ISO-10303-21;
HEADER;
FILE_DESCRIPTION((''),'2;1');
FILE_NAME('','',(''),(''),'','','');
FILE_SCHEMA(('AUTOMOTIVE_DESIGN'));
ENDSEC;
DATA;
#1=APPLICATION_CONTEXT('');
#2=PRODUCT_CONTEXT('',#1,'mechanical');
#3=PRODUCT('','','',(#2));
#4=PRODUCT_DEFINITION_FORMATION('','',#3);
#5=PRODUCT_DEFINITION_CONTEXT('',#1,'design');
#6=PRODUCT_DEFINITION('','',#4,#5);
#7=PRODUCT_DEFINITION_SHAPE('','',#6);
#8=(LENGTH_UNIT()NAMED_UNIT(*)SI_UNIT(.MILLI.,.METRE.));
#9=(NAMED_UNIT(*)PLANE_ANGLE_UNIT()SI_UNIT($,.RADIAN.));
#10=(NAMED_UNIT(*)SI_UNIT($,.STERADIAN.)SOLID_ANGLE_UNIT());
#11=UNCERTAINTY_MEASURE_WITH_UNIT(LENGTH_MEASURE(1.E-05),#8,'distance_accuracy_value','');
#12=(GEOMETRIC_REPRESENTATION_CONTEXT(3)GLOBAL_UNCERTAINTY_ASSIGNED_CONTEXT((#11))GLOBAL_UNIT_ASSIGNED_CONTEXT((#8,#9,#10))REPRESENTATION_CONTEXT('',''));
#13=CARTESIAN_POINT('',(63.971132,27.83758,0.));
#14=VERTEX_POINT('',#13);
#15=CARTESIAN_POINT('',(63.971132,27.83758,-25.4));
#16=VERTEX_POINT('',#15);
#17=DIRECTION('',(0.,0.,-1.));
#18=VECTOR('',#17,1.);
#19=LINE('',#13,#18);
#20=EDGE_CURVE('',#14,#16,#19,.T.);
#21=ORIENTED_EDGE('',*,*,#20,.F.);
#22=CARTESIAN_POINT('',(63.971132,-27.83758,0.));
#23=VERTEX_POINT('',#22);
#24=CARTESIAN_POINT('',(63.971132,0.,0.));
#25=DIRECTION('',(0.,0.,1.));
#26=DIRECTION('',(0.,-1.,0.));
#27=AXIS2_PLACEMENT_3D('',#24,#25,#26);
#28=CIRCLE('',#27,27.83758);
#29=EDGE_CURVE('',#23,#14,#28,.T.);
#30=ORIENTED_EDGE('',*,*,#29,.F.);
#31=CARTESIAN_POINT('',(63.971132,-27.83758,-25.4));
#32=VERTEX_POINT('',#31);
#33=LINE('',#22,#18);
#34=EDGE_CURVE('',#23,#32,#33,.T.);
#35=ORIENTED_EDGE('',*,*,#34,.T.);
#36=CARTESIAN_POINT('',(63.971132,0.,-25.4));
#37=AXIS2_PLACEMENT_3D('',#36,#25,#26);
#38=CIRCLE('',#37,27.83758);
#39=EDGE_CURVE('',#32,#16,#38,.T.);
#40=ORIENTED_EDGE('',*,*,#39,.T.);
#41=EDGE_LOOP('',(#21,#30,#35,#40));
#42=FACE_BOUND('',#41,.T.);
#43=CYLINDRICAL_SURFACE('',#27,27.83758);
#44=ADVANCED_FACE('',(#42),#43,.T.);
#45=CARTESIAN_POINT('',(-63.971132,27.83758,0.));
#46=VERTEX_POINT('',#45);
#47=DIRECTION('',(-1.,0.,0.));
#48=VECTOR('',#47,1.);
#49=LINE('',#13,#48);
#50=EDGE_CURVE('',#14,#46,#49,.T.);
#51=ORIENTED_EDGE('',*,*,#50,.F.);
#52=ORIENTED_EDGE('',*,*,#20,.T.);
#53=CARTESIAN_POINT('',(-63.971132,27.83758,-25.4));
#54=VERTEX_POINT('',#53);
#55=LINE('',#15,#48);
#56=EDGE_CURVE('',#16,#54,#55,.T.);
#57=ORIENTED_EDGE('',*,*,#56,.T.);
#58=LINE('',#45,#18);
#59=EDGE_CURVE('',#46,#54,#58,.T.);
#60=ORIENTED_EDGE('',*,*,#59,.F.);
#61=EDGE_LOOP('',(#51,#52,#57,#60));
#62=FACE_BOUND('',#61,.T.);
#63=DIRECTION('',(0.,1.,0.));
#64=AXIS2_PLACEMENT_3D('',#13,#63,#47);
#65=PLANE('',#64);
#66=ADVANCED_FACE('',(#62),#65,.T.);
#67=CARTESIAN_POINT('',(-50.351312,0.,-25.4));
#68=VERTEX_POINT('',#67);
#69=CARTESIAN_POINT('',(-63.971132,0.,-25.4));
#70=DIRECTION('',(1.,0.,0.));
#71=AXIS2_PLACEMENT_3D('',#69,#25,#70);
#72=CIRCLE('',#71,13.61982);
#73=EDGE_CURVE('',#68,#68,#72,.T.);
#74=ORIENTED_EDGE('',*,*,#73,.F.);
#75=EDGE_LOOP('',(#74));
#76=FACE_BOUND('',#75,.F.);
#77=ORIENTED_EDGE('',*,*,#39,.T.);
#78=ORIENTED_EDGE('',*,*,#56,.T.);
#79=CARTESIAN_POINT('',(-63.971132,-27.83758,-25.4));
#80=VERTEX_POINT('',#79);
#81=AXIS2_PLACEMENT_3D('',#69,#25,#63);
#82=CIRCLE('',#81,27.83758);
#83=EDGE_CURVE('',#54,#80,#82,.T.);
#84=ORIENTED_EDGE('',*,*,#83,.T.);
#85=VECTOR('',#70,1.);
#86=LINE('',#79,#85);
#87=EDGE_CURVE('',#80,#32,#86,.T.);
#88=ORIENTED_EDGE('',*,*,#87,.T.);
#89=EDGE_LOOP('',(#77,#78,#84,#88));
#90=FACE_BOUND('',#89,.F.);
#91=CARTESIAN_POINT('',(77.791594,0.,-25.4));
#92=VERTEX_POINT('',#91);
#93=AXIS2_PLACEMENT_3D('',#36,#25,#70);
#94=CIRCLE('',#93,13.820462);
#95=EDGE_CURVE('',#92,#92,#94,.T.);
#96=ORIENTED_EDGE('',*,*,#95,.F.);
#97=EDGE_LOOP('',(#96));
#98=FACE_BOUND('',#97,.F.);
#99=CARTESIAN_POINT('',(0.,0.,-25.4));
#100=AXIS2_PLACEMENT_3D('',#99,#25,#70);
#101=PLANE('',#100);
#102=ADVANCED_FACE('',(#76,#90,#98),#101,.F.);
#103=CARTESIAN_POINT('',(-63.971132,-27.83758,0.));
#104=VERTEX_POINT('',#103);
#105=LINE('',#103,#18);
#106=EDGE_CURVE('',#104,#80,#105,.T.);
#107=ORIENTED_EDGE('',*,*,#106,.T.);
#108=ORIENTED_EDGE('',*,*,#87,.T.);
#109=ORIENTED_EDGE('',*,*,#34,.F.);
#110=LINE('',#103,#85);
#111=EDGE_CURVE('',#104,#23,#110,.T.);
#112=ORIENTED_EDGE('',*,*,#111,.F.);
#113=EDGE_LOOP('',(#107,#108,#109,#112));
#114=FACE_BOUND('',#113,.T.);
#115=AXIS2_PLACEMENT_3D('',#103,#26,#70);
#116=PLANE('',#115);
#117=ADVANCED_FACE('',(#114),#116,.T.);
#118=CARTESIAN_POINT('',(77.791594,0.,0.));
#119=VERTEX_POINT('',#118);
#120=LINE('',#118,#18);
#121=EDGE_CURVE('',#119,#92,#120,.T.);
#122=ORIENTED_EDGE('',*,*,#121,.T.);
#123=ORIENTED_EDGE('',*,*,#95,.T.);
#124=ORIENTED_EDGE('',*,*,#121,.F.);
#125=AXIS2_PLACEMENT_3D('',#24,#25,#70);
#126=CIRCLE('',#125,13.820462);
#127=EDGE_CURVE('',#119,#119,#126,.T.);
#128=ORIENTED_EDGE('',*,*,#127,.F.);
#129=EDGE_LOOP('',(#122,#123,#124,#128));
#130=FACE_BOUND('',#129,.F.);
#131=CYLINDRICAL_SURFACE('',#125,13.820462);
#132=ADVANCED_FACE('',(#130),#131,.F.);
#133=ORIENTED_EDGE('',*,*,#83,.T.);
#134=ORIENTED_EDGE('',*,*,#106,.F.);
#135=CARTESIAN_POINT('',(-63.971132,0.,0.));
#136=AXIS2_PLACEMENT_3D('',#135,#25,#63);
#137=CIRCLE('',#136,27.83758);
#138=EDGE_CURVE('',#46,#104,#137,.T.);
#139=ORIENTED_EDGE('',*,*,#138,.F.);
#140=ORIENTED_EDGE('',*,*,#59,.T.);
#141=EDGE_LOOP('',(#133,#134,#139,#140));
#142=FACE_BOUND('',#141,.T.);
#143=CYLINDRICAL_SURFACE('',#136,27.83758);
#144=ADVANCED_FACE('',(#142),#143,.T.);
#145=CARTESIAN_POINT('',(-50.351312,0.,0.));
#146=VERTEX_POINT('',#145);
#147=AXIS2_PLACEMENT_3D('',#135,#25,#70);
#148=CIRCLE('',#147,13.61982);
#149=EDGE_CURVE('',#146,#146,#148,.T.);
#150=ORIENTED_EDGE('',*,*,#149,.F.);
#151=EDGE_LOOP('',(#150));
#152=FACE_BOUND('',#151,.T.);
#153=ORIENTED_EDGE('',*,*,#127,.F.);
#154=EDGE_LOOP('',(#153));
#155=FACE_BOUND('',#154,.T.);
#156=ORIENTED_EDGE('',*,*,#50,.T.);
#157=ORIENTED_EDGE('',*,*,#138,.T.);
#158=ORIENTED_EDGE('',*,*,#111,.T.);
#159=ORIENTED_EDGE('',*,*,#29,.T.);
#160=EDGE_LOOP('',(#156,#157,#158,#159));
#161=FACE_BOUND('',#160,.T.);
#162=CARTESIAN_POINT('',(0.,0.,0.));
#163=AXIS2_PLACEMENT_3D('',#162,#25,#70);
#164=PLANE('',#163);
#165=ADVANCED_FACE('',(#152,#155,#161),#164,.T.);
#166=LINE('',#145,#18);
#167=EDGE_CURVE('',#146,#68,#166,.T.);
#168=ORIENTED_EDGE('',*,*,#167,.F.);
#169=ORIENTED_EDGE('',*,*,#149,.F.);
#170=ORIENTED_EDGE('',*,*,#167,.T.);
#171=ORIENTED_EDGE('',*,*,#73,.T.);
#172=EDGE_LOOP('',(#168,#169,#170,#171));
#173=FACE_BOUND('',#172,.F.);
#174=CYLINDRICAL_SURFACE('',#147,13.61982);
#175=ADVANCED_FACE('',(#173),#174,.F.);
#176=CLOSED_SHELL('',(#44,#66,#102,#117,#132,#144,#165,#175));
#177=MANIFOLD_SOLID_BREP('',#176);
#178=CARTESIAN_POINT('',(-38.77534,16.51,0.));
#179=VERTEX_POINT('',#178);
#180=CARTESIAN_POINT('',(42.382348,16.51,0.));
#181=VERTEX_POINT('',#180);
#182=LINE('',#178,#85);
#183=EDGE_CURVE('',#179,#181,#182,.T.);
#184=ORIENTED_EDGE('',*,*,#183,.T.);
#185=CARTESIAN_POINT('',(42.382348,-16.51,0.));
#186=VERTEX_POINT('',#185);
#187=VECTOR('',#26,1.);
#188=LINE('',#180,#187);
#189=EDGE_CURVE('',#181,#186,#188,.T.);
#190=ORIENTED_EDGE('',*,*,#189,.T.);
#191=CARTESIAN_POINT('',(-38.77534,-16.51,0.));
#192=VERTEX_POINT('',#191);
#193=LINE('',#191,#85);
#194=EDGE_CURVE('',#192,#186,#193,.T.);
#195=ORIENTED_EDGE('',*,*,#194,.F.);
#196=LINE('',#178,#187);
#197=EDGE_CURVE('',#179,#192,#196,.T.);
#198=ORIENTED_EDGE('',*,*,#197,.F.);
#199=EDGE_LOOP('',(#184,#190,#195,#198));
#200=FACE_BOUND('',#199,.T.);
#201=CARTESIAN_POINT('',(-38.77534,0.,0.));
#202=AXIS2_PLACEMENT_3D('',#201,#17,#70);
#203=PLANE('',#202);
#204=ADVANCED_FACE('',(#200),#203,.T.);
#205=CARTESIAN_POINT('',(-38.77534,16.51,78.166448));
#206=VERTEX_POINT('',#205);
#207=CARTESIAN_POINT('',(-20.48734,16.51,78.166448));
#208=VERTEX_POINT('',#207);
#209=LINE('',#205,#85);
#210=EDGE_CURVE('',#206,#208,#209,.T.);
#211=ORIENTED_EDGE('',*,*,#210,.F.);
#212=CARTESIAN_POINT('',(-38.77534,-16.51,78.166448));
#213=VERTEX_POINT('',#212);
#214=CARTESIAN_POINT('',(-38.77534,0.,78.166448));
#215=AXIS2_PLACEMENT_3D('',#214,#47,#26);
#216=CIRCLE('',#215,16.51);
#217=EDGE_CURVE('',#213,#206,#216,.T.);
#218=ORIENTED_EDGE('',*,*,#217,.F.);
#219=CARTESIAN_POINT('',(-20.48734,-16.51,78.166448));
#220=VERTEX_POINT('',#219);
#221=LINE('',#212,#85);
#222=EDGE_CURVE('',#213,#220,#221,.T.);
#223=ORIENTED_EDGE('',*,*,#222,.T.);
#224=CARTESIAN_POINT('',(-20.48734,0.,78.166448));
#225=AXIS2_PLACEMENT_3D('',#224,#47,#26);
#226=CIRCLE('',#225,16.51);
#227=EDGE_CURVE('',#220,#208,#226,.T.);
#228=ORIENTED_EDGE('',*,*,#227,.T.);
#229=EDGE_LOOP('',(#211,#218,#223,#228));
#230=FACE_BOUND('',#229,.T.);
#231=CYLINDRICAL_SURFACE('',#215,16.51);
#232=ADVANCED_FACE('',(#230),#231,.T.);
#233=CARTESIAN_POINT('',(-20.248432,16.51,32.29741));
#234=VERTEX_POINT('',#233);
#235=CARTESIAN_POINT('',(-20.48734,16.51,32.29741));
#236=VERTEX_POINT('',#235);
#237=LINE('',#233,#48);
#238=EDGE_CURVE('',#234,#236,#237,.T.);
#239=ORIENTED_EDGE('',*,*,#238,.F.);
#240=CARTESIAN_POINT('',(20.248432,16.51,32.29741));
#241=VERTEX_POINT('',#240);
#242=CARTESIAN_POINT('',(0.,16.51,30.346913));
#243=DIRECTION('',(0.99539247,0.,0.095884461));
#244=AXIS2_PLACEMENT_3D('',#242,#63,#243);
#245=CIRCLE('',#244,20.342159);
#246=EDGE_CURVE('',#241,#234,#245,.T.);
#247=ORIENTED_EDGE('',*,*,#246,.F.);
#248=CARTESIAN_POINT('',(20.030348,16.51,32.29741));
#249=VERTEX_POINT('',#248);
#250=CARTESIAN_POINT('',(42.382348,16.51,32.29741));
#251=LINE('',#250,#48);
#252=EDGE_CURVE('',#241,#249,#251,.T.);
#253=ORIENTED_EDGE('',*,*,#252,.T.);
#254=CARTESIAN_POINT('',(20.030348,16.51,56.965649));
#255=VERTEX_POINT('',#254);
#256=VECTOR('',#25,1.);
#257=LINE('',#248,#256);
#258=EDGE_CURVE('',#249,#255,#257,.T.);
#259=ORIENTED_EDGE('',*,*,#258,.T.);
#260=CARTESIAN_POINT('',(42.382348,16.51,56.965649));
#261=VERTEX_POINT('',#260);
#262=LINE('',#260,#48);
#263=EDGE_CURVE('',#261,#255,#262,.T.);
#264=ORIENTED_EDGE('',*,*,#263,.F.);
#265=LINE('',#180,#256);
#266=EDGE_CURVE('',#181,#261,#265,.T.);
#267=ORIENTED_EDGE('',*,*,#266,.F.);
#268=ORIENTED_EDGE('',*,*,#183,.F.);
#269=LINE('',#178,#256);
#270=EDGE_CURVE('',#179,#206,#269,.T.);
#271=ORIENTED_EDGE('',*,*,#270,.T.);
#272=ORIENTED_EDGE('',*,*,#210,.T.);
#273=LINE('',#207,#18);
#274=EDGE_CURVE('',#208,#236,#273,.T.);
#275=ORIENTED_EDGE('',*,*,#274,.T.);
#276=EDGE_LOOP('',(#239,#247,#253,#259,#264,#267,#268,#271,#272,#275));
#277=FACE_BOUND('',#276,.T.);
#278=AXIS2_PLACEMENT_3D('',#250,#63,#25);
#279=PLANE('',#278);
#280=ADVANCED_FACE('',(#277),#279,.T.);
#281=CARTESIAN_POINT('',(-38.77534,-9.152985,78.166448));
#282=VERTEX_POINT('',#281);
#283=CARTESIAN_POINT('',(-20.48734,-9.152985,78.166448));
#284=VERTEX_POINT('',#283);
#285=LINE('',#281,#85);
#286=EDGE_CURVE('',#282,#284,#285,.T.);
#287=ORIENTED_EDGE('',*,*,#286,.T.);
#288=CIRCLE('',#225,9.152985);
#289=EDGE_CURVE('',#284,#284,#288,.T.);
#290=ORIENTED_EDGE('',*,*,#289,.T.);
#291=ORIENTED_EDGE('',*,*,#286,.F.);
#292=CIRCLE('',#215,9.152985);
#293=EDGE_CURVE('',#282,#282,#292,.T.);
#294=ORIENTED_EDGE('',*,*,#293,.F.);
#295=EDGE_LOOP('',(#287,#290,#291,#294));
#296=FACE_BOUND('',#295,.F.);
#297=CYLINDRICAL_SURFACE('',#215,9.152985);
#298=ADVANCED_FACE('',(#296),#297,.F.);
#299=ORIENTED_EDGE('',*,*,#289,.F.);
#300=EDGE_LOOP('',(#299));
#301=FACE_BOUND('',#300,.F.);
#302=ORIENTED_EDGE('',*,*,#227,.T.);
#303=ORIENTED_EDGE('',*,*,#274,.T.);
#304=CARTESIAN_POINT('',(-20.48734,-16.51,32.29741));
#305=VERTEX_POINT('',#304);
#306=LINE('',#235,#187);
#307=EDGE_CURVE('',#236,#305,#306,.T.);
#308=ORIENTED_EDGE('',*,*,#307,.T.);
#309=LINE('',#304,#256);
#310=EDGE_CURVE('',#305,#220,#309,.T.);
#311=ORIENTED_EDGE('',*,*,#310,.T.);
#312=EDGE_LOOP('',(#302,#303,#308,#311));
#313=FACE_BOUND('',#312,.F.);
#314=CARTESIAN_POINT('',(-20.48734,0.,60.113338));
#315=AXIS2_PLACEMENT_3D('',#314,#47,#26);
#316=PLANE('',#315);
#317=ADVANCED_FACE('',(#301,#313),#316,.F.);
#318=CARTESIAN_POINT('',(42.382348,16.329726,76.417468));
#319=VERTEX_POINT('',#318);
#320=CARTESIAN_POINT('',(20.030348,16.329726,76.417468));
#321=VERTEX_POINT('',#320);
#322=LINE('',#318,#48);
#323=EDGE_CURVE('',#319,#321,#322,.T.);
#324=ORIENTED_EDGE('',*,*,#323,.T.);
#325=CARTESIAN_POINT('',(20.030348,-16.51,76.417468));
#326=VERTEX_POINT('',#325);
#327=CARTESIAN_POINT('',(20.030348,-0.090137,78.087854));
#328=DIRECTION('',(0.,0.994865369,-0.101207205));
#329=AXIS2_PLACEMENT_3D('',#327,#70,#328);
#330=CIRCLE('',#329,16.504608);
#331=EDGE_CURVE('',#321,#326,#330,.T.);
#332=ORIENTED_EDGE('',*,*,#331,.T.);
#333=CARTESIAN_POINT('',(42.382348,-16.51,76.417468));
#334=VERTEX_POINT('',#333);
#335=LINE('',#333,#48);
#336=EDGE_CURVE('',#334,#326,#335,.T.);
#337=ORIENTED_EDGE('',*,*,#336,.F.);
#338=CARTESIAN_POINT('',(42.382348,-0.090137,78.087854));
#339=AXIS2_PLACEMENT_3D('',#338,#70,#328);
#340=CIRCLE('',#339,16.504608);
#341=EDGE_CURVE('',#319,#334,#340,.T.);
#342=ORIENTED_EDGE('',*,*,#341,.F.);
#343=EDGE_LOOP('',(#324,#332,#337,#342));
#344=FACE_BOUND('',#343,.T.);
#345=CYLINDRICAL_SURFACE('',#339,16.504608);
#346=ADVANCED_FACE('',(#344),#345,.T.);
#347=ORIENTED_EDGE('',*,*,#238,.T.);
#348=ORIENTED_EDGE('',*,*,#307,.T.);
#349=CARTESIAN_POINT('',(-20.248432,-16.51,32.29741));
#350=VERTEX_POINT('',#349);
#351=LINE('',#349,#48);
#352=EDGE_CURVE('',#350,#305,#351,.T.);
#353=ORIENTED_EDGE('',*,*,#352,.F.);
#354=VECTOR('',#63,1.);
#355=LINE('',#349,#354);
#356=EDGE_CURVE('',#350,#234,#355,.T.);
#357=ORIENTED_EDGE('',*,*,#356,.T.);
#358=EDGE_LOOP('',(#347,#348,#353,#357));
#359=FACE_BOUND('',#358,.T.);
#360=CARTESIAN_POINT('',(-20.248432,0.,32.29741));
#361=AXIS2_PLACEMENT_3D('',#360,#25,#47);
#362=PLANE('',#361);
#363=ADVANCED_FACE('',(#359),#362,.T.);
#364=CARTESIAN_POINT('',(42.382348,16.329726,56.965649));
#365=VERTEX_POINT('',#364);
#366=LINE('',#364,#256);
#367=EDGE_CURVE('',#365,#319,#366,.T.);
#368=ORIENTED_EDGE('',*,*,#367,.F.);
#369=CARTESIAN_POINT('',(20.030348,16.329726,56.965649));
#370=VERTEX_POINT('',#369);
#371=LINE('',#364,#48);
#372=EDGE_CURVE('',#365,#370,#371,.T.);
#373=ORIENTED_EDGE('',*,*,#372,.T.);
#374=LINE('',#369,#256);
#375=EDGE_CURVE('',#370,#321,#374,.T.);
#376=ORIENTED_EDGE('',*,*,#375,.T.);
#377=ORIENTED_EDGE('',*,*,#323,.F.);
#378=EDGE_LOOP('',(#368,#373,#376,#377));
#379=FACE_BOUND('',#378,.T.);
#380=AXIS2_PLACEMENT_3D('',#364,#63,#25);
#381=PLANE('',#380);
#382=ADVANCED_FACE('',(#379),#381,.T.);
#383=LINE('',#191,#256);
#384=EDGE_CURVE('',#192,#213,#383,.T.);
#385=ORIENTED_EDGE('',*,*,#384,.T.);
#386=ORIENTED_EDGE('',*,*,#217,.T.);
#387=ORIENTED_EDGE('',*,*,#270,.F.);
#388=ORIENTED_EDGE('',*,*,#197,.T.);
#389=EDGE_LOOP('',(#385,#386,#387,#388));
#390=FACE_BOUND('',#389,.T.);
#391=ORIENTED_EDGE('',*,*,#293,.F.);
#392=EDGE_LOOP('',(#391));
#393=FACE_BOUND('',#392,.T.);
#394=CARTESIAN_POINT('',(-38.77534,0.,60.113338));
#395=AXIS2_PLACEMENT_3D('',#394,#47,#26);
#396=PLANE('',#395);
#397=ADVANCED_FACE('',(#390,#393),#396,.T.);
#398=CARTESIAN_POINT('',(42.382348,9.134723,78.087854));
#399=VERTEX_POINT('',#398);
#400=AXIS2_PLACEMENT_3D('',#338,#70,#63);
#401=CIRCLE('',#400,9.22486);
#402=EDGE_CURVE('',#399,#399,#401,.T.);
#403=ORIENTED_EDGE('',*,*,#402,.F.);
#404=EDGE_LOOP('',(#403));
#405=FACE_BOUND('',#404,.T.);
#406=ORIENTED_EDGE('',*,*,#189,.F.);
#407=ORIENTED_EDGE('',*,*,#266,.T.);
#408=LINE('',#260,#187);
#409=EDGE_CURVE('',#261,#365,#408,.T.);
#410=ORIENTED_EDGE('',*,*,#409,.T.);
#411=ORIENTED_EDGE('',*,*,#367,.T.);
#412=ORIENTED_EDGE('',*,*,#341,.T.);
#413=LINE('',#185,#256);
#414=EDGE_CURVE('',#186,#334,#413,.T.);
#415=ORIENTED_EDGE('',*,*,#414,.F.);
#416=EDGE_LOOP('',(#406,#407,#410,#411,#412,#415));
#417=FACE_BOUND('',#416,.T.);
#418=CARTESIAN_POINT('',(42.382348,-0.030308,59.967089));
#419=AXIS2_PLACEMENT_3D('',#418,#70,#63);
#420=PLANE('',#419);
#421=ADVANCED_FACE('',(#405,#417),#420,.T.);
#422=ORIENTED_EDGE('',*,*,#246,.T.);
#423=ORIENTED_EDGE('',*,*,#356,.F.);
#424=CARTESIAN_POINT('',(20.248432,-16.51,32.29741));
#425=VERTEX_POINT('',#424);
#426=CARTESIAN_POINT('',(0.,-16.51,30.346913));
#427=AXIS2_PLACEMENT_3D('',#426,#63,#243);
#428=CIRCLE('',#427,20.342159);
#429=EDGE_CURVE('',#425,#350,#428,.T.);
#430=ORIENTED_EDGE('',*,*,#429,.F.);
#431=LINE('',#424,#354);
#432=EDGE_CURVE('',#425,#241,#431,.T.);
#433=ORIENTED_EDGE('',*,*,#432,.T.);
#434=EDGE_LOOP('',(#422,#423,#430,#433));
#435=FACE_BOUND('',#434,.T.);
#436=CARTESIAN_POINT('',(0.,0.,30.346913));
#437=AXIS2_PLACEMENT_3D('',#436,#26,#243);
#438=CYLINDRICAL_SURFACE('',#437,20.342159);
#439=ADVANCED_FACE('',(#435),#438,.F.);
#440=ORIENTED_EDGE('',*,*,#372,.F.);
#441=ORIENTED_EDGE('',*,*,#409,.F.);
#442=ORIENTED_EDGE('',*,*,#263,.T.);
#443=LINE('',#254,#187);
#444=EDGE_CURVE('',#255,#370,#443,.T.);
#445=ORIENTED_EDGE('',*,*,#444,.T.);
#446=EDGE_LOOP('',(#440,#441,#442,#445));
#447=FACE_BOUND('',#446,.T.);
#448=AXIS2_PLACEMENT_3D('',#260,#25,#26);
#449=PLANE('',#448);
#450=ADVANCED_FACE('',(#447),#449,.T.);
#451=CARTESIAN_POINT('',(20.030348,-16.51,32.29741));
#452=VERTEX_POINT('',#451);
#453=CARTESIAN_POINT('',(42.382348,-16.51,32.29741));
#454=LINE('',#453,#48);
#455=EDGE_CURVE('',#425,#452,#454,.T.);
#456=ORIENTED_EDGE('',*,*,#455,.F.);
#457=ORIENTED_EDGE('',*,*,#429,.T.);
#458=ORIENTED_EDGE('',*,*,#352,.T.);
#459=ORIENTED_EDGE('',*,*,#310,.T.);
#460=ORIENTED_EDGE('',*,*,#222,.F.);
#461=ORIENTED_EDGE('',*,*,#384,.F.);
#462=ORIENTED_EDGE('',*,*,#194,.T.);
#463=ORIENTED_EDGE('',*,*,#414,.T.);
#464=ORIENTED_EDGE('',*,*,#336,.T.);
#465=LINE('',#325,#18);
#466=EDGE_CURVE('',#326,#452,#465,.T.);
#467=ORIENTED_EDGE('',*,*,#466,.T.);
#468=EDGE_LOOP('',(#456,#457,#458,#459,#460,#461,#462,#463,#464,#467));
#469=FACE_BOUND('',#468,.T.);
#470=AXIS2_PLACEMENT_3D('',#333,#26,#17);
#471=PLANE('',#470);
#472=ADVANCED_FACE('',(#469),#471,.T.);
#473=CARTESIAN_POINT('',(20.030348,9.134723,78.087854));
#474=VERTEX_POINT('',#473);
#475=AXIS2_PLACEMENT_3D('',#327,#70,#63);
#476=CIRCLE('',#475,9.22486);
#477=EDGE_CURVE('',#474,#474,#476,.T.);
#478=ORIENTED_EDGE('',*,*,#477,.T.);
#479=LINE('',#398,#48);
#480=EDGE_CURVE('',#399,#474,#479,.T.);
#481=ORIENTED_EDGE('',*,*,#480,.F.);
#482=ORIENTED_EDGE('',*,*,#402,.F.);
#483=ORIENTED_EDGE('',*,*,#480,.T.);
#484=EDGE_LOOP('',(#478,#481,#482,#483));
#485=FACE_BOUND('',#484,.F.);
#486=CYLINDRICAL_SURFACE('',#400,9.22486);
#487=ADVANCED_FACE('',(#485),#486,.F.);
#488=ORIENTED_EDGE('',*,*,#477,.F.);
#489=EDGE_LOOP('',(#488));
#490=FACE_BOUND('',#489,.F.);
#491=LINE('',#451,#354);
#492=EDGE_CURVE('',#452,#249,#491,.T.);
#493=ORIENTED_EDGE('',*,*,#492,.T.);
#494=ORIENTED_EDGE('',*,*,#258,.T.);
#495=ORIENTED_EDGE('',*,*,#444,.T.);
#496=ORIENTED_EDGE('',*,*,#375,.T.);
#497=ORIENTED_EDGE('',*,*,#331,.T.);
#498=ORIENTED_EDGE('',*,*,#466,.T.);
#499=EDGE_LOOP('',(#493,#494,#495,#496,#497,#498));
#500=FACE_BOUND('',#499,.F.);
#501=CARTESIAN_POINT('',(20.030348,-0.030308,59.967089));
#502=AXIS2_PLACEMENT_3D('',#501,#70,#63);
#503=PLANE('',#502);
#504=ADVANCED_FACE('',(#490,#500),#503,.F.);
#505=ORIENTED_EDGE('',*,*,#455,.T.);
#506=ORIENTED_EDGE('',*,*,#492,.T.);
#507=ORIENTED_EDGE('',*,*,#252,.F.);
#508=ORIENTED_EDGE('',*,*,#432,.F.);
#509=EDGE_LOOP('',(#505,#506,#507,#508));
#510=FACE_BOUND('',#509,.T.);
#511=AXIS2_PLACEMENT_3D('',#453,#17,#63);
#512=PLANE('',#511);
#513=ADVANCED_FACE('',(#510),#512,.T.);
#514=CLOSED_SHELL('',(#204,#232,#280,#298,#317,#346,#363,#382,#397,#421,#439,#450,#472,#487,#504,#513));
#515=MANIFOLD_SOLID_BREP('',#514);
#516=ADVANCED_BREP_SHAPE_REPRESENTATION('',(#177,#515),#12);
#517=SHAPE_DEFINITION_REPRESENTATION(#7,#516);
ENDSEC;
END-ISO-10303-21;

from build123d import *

# Parameters (mm, degrees)
F0_R     = 13.6198201134
F0_R_2   = 13.8204624453
F1_DEPTH = 25.4
F3_DEPTH = 16.51
F4_R     = 9.1529854274
F5_DEPTH = 18.288
F6_R     = 9.2248596532
F7_DEPTH = 22.352


# Not quite as in the source:
# - a feature names something its author has since deleted; it is built from what else it names


with BuildPart() as f1:
    # F0 (on Top) → F1 (new body)
    with BuildSketch(Plane.XY):
        with BuildLine():
            Line((-63.97113204, -27.8375800699), (63.97113204, -27.8375800699))
            ThreePointArc((63.97113204, -27.8375800699), (91.8087121099, 0), (63.97113204, 27.8375800699))
            Line((63.97113204, 27.8375800699), (-63.97113204, 27.8375800699))
            ThreePointArc((-63.97113204, 27.8375800699), (-91.8087121099, 0), (-63.97113204, -27.8375800699))
        make_face()
        with Locations((-63.97113204, 0)):
            Circle(F0_R, mode=Mode.SUBTRACT)
        with Locations((63.97113204, 0)):
            Circle(F0_R_2, mode=Mode.SUBTRACT)
    extrude(amount=-F1_DEPTH)


with BuildPart() as f3:
    # F2 (on Front) → F3 (new body, symmetric)
    with BuildSketch(Plane.XZ):
        with BuildLine():
            Line((-38.7753397226, 32.2974100709), (-38.7753397226, 0))
            Line((-38.7753397226, 0), (42.3823483288, 0))
            Line((42.3823483288, 0), (42.3823483288, 32.2974100709))
            Line((42.3823483288, 32.2974100709), (20.2484317124, 32.2974100709))
            ThreePointArc((20.2484317124, 32.2974100709), (0, 10.0047543374), (-20.2484317124, 32.2974100709))
            Line((-20.2484317124, 32.2974100709), (-38.7753397226, 32.2974100709))
        make_face()
    extrude(amount=F3_DEPTH, both=True)

    # F4 (on face) → F5 (join)
    with BuildSketch(Plane(origin=(-38.7753397226, 0, 0), x_dir=(0, -1, 0), z_dir=(-1, 0, 0))):
        with BuildLine():
            Line((-16.51, 78.1664475799), (-16.51, 56.965649128))
            Line((-16.51, 56.965649128), (-16.51, 32.2974100709))
            Line((-16.51, 32.2974100709), (16.51, 32.2974100709))
            Line((16.51, 32.2974100709), (16.51, 56.965649128))
            Line((16.51, 56.965649128), (16.51, 78.1664475799))
            ThreePointArc((16.51, 78.1664475799), (0, 94.6764475799), (-16.51, 78.1664475799))
        make_face()
        with Locations((0, 78.1664475799)):
            Circle(F4_R, mode=Mode.SUBTRACT)
    extrude(amount=-F5_DEPTH)

    # F6 (on face) → F7 (join)
    with BuildSketch(Plane.YZ.offset(42.3823483288)):
        with BuildLine():
            Line((-16.51, 76.4174684882), (-16.51, 56.965649128))
            Line((-16.51, 56.965649128), (-16.51, 32.2974100709))
            Line((-16.51, 32.2974100709), (16.51, 32.2974100709))
            Line((16.51, 32.2974100709), (16.51, 56.965649128))
            Line((16.51, 56.965649128), (16.3297262043, 56.965649128))
            Line((16.3297262043, 56.965649128), (16.3297262043, 76.4174684882))
            ThreePointArc((16.3297262043, 76.4174684882), (-0.0901368979, 94.5924619413), (-16.51, 76.4174684882))
        make_face()
        with Locations((-0.0901368979, 78.0878537591)):
            Circle(F6_R, mode=Mode.SUBTRACT)
    extrude(amount=-F7_DEPTH)


solid = Compound([f1.part, f3.part])
